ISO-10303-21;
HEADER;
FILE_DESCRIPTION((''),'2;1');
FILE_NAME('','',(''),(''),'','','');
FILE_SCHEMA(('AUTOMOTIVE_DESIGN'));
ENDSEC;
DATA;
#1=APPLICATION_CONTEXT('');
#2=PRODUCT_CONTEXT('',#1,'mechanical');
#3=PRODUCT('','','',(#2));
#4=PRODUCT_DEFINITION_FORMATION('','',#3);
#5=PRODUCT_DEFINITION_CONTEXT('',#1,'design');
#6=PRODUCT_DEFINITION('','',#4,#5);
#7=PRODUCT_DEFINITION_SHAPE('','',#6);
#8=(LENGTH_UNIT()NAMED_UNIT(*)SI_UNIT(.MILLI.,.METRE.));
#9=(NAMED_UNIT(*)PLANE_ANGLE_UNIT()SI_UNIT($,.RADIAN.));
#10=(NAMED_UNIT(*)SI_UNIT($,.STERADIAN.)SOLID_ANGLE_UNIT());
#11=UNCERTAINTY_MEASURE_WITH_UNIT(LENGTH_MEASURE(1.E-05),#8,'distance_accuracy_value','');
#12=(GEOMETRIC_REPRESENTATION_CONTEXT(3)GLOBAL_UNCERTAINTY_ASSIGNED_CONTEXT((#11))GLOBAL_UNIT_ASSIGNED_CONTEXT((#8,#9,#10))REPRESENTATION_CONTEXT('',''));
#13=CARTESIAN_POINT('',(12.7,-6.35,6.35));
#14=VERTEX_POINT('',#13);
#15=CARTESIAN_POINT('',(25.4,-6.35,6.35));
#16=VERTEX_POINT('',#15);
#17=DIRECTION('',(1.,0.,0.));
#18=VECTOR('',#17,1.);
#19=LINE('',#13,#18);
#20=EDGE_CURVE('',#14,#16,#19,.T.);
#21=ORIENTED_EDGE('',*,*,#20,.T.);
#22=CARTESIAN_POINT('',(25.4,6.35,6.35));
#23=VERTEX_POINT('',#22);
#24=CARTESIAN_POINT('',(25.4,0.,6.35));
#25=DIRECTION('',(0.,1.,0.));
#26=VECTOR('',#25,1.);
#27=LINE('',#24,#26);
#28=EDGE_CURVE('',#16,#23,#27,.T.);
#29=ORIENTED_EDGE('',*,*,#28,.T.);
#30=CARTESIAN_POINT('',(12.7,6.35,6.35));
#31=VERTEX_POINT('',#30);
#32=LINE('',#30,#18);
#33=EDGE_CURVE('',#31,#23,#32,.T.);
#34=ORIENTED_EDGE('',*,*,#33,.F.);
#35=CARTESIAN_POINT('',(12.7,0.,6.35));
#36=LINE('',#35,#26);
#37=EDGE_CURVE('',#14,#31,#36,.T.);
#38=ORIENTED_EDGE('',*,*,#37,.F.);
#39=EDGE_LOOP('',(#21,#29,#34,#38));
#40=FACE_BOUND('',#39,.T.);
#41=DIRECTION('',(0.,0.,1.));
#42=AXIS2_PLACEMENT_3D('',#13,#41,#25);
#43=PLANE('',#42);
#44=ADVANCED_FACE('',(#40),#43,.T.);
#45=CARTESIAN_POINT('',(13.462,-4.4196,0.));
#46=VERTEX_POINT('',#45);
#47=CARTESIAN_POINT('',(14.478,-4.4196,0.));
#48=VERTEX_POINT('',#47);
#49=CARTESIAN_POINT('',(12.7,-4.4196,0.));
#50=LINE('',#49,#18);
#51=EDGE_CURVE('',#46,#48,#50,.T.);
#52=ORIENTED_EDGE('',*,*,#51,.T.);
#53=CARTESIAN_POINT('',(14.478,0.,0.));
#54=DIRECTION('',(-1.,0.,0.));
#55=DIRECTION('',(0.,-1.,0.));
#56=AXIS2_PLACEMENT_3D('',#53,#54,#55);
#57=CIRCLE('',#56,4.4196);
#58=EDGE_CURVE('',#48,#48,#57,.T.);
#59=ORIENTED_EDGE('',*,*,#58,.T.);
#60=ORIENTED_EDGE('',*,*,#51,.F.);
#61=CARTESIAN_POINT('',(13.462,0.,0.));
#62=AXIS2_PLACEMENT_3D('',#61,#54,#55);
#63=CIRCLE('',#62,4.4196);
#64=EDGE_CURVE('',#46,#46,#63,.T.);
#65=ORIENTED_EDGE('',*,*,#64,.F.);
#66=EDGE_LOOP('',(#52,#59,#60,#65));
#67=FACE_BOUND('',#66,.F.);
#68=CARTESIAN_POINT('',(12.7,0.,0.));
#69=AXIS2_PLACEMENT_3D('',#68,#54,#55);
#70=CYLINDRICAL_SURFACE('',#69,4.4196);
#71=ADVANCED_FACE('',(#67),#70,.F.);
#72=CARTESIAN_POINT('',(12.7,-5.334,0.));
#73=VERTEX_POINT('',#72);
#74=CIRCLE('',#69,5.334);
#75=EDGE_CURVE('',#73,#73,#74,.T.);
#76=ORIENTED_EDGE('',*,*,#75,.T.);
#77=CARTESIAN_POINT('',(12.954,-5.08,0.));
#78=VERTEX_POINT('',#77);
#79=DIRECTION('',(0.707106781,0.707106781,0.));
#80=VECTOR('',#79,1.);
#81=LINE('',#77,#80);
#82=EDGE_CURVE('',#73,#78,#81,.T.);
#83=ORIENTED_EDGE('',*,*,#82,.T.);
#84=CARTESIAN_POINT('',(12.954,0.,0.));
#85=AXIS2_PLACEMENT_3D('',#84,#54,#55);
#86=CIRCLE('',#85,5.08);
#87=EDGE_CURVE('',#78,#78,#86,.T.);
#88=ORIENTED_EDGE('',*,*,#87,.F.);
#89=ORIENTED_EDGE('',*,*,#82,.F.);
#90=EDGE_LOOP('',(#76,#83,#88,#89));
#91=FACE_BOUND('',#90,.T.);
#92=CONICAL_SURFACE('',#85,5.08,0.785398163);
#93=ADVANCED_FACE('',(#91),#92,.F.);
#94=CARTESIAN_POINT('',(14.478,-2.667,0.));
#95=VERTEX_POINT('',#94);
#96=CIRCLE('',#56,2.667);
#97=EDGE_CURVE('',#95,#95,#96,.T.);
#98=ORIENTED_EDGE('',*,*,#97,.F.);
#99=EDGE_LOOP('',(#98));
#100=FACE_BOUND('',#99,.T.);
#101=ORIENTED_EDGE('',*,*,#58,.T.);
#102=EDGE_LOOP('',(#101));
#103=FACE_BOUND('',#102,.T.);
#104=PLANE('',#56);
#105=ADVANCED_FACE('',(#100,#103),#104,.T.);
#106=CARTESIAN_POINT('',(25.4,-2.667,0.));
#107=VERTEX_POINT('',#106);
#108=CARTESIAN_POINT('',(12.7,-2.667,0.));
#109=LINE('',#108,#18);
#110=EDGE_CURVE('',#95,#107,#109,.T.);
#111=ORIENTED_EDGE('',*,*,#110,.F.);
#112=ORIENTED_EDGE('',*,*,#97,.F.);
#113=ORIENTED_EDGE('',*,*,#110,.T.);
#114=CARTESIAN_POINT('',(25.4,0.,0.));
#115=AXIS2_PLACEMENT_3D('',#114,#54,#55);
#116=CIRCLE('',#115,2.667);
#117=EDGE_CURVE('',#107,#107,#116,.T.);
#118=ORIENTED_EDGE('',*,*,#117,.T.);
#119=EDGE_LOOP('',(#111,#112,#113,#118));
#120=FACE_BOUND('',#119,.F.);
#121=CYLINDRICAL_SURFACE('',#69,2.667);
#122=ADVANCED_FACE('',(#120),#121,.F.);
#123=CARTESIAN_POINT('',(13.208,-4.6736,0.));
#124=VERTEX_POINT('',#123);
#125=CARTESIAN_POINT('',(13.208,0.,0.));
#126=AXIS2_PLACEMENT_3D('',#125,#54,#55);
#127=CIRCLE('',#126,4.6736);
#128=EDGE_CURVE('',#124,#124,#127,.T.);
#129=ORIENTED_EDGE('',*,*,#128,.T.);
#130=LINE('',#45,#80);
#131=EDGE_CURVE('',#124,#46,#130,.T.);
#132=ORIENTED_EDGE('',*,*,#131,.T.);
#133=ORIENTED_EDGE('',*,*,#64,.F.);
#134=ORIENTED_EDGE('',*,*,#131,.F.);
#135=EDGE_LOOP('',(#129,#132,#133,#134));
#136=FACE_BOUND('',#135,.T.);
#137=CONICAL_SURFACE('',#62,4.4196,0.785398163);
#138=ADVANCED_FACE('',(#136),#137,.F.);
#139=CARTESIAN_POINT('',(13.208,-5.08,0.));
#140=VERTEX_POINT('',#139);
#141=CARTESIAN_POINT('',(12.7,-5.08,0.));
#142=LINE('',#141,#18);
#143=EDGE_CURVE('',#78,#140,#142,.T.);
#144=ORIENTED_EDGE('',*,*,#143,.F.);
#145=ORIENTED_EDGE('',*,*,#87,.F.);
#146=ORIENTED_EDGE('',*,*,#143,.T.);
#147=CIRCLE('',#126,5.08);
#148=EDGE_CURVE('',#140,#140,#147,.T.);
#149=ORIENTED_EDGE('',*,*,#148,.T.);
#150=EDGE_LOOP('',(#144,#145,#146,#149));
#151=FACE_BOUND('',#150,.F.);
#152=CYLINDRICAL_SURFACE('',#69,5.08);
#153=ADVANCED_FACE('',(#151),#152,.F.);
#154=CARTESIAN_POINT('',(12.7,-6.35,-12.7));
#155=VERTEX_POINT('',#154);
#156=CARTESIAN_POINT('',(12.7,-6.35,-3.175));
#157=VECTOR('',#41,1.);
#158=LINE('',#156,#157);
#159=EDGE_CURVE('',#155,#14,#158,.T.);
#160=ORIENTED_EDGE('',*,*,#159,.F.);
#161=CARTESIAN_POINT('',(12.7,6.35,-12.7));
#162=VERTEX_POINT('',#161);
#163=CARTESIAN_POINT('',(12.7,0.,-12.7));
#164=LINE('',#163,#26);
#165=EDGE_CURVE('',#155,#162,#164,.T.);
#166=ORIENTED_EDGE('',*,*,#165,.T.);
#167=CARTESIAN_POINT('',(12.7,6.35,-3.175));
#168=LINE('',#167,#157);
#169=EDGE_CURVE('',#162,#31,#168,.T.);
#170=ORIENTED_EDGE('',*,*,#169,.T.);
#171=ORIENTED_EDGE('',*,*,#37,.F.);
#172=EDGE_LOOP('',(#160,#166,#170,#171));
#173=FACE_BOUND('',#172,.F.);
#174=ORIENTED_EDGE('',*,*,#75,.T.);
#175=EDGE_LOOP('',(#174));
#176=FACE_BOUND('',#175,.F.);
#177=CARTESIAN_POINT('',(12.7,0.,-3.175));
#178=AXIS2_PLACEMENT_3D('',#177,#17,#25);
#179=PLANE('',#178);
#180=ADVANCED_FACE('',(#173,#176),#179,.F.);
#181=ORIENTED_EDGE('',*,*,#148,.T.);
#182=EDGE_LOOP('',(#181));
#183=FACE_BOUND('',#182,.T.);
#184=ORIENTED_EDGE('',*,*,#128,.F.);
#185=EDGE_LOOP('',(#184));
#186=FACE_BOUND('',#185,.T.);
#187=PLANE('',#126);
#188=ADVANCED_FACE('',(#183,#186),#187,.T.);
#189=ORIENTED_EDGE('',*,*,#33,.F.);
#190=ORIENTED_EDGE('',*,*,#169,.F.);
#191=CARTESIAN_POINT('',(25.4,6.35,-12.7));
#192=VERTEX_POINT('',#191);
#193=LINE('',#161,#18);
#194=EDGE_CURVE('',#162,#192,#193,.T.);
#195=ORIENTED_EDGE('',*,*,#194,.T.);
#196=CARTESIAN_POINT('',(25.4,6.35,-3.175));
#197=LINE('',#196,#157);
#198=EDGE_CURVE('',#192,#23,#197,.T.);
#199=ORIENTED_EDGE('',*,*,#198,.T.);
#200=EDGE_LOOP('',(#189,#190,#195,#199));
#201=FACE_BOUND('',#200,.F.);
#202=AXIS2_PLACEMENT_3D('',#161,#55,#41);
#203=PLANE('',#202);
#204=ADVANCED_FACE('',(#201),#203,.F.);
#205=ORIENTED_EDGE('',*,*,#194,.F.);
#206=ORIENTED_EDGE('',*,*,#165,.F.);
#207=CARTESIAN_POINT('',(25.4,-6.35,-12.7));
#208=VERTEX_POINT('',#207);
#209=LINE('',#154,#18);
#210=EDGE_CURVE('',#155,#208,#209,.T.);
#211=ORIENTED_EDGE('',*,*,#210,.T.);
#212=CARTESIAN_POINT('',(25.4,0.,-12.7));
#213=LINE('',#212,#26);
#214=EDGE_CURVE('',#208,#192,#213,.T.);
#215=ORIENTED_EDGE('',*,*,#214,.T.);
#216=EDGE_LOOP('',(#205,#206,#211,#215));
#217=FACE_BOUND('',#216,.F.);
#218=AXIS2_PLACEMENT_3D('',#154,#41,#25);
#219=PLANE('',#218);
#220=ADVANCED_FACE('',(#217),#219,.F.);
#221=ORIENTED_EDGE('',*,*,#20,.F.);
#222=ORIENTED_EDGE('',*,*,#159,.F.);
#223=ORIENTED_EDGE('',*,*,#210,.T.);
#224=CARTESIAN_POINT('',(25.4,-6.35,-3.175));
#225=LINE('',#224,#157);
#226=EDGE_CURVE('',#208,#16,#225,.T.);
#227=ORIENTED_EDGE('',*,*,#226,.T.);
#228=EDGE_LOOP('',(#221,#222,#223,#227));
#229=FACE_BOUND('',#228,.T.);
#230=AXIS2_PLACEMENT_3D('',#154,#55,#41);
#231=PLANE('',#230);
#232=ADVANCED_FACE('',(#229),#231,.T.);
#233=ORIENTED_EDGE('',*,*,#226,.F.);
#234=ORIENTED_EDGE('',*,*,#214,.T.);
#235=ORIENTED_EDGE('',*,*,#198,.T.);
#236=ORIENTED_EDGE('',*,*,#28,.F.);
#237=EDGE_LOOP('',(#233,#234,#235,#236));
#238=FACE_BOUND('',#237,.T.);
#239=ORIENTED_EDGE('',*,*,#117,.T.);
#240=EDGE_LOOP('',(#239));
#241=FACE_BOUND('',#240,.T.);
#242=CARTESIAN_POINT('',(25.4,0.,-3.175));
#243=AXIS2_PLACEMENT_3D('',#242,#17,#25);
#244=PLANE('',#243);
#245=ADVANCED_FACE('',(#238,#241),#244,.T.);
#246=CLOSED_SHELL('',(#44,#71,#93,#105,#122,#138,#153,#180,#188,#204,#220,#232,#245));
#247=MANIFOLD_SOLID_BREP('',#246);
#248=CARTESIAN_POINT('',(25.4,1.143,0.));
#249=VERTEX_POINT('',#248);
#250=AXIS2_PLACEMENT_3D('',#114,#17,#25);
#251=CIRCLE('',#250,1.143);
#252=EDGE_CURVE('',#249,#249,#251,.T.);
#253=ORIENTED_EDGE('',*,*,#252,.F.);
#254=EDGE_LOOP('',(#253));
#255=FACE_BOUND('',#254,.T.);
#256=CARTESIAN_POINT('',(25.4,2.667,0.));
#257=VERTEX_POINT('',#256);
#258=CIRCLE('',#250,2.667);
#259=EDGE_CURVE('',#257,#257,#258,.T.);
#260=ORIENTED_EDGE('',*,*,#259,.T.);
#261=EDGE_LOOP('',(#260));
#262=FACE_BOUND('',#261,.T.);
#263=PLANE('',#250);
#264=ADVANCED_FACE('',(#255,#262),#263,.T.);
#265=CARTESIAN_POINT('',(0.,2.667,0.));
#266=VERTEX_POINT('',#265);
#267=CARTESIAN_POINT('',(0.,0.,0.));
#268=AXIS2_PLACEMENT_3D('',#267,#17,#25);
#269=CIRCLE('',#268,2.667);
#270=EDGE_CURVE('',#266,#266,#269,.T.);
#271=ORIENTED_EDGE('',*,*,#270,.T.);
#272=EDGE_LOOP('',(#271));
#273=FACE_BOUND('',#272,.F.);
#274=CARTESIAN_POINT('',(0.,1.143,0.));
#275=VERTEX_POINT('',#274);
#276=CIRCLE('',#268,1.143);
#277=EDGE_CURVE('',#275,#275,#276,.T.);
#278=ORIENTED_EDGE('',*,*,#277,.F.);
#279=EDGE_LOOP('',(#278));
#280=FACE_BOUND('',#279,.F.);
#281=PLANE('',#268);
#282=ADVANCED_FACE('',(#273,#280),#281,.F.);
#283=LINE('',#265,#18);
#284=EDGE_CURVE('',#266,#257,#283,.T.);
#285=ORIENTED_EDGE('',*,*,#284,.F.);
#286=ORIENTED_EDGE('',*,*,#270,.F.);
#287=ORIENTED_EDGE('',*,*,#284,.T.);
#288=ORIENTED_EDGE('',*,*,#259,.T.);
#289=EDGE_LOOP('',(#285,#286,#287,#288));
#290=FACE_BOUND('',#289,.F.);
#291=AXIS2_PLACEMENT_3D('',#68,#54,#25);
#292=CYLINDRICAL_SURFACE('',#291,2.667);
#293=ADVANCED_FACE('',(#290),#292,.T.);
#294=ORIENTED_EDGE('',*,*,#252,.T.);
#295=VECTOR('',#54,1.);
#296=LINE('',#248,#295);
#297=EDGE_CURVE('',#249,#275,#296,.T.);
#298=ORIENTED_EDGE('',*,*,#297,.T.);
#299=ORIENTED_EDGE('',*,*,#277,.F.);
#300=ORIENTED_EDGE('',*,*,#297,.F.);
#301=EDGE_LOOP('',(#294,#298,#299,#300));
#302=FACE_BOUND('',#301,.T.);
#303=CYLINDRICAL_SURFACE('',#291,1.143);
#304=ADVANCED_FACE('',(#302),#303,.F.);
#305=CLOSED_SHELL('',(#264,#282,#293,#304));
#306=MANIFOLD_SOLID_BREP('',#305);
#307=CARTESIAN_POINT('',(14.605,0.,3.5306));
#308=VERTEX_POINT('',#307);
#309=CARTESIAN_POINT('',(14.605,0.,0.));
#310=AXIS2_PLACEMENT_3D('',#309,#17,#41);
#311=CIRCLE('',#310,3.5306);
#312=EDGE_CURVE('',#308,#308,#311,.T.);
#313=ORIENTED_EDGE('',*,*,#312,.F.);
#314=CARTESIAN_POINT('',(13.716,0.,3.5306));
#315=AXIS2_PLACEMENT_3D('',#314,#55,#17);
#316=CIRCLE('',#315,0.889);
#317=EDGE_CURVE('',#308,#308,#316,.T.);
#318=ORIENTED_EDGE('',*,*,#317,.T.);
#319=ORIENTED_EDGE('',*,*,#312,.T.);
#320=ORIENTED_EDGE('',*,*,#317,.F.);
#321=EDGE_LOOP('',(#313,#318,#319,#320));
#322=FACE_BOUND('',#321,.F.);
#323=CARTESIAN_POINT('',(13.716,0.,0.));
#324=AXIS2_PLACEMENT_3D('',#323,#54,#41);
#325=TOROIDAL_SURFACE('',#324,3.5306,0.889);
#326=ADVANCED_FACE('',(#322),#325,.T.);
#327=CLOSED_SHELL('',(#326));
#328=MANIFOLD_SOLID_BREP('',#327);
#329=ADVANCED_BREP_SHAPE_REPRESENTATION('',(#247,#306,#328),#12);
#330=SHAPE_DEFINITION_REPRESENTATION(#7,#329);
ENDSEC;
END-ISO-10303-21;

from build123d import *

# Parameters (mm, degrees)
F0_R      = 2.667
F0_R_2    = 1.143
F1_DEPTH  = 12.7
F3_R      = 0.889
F5_W      = 12.7
F5_H      = 19.05
F6_DEPTH  = 12.7
F7_R      = 2.667
F8_DEPTH  = 12.701
F9_R      = 4.4196
F10_DEPTH = 1.778
F11_R     = 5.08
F12_DEPTH = 0.508
F13_SIZE  = 0.254
F14_R     = 2.667
F14_R_2   = 1.143
F15_DEPTH = 12.7


with BuildPart() as f1:
    # F0 (on Right) → F1 (new body)
    with BuildSketch(Plane.YZ):
        Circle(F0_R)
        Circle(F0_R_2, mode=Mode.SUBTRACT)
    extrude(amount=F1_DEPTH)

    # F14 (on face) → F15 (join)
    with BuildSketch(Plane.YZ.offset(12.7)):
        Circle(F14_R)
        Circle(F14_R_2, mode=Mode.SUBTRACT)
    extrude(amount=F15_DEPTH)


with BuildPart() as f4:
    # F3 (on Front) → F4 (revolve)
    with BuildSketch(Plane.XZ):
        with Locations((13.716, 3.5306)):
            Circle(F3_R)
    revolve(axis=Axis((18.1991, 0, 0), (1, 0, 0)))


with BuildPart() as f6:
    # F5 (on face) → F6 (new body)
    with BuildSketch(Plane.YZ.offset(12.7)):
        with Locations((0, -3.175)):
            Rectangle(F5_W, F5_H)
    extrude(amount=F6_DEPTH)

    # F7 (on face) → F8 (cut, through all)
    with BuildSketch(Plane(origin=(12.7, 0, 0), x_dir=(0, -1, 0), z_dir=(-1, 0, 0))):
        Circle(F7_R)
    extrude(amount=-F8_DEPTH, mode=Mode.SUBTRACT)

    # F9 (on face) → F10 (cut)
    with BuildSketch(Plane(origin=(12.7, 0, 0), x_dir=(0, -1, 0), z_dir=(-1, 0, 0))):
        Circle(F9_R)
    extrude(amount=-F10_DEPTH, mode=Mode.SUBTRACT)

    # F11 (on face) → F12 (cut)
    with BuildSketch(Plane(origin=(12.7, 0, 0), x_dir=(0, -1, 0), z_dir=(-1, 0, 0))):
        Circle(F11_R)
    extrude(amount=-F12_DEPTH, mode=Mode.SUBTRACT)

    # F13
    f13_edges = [f6.edges().sort_by_distance(p)[0] for p in [
        (12.7, 5.08, 0),
        (13.208, 4.4196, 0),
    ]]
    chamfer(f13_edges, length=F13_SIZE)


solid = Compound([f1.part, f4.part, f6.part])
